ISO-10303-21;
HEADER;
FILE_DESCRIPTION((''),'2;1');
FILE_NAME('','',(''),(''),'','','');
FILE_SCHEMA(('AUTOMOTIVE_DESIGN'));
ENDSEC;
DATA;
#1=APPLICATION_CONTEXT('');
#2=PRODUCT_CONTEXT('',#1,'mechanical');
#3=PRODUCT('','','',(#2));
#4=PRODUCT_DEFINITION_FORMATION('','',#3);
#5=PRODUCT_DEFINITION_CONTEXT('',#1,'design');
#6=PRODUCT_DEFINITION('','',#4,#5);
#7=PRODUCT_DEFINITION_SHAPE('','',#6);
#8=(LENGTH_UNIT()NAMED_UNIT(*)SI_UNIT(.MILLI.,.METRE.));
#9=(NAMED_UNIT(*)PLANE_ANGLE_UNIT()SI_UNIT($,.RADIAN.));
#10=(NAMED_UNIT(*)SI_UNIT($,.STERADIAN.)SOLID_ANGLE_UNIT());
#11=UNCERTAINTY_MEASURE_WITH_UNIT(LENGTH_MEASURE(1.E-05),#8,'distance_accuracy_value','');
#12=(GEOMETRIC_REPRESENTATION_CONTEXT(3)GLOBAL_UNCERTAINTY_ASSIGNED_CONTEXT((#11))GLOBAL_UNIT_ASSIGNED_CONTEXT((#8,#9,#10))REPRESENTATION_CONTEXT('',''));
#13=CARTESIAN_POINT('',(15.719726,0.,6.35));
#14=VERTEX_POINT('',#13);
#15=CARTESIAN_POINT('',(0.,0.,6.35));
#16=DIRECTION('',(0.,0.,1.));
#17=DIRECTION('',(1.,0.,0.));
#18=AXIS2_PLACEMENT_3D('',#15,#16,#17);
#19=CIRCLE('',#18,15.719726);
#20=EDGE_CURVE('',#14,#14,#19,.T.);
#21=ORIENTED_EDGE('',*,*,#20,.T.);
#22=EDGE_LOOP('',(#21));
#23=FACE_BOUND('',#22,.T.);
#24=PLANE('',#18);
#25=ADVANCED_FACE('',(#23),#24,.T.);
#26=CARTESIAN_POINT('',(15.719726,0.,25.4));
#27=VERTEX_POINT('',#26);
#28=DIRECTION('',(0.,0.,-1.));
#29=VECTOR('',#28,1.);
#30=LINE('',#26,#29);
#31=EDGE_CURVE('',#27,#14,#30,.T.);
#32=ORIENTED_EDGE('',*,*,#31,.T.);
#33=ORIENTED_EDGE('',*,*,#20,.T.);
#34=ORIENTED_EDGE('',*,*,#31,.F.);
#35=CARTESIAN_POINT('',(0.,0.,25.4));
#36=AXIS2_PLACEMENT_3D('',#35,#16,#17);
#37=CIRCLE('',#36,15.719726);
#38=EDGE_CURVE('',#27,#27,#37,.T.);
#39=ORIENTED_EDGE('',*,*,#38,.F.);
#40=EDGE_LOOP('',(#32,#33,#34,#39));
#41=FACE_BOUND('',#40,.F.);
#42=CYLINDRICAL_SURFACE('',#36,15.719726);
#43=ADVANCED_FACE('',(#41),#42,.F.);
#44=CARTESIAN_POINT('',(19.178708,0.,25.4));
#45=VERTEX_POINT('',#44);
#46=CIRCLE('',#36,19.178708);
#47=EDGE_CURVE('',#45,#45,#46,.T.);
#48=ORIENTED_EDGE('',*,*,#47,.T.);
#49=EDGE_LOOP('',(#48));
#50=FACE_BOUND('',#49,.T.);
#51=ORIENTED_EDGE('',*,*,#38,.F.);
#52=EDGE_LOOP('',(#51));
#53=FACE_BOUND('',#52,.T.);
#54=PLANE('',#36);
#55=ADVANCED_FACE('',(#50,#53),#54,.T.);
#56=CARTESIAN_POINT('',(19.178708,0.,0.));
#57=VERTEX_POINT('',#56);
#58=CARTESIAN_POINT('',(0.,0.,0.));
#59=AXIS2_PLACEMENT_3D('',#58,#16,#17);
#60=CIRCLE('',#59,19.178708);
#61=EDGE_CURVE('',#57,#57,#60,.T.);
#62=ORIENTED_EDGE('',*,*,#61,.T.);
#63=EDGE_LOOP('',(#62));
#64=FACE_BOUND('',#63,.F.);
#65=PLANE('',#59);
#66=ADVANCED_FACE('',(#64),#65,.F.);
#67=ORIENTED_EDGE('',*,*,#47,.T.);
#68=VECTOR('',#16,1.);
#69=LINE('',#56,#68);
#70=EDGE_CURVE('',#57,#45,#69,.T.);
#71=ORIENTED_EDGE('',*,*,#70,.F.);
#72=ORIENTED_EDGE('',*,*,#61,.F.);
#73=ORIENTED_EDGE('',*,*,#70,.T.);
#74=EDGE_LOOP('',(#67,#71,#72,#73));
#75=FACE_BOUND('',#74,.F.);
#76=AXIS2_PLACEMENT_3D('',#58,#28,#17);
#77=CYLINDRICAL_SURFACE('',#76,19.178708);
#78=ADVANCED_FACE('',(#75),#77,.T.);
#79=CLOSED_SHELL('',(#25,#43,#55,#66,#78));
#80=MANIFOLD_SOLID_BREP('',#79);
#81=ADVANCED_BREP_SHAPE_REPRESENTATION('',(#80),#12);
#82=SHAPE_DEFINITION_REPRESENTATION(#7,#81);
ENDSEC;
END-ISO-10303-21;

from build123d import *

# Parameters (mm, degrees)
F0_R     = 19.1787076441
F1_DEPTH = 25.4
F6_R     = 15.7197255207
F7_DEPTH = 19.05


# Not quite as in the source:
# - the program builds the solid bodies; features that only make, move or delete a surface that nothing else refers to are left out


with BuildPart() as f1:
    # F0 (on Top) → F1 (new body)
    with BuildSketch(Plane.XY):
        Circle(F0_R)
    extrude(amount=F1_DEPTH)

    # F6 (on face) → F7 (cut)
    with BuildSketch(Plane.XY.offset(25.4)):
        Circle(F6_R)
    extrude(amount=-F7_DEPTH, mode=Mode.SUBTRACT)


solid = f1.part
